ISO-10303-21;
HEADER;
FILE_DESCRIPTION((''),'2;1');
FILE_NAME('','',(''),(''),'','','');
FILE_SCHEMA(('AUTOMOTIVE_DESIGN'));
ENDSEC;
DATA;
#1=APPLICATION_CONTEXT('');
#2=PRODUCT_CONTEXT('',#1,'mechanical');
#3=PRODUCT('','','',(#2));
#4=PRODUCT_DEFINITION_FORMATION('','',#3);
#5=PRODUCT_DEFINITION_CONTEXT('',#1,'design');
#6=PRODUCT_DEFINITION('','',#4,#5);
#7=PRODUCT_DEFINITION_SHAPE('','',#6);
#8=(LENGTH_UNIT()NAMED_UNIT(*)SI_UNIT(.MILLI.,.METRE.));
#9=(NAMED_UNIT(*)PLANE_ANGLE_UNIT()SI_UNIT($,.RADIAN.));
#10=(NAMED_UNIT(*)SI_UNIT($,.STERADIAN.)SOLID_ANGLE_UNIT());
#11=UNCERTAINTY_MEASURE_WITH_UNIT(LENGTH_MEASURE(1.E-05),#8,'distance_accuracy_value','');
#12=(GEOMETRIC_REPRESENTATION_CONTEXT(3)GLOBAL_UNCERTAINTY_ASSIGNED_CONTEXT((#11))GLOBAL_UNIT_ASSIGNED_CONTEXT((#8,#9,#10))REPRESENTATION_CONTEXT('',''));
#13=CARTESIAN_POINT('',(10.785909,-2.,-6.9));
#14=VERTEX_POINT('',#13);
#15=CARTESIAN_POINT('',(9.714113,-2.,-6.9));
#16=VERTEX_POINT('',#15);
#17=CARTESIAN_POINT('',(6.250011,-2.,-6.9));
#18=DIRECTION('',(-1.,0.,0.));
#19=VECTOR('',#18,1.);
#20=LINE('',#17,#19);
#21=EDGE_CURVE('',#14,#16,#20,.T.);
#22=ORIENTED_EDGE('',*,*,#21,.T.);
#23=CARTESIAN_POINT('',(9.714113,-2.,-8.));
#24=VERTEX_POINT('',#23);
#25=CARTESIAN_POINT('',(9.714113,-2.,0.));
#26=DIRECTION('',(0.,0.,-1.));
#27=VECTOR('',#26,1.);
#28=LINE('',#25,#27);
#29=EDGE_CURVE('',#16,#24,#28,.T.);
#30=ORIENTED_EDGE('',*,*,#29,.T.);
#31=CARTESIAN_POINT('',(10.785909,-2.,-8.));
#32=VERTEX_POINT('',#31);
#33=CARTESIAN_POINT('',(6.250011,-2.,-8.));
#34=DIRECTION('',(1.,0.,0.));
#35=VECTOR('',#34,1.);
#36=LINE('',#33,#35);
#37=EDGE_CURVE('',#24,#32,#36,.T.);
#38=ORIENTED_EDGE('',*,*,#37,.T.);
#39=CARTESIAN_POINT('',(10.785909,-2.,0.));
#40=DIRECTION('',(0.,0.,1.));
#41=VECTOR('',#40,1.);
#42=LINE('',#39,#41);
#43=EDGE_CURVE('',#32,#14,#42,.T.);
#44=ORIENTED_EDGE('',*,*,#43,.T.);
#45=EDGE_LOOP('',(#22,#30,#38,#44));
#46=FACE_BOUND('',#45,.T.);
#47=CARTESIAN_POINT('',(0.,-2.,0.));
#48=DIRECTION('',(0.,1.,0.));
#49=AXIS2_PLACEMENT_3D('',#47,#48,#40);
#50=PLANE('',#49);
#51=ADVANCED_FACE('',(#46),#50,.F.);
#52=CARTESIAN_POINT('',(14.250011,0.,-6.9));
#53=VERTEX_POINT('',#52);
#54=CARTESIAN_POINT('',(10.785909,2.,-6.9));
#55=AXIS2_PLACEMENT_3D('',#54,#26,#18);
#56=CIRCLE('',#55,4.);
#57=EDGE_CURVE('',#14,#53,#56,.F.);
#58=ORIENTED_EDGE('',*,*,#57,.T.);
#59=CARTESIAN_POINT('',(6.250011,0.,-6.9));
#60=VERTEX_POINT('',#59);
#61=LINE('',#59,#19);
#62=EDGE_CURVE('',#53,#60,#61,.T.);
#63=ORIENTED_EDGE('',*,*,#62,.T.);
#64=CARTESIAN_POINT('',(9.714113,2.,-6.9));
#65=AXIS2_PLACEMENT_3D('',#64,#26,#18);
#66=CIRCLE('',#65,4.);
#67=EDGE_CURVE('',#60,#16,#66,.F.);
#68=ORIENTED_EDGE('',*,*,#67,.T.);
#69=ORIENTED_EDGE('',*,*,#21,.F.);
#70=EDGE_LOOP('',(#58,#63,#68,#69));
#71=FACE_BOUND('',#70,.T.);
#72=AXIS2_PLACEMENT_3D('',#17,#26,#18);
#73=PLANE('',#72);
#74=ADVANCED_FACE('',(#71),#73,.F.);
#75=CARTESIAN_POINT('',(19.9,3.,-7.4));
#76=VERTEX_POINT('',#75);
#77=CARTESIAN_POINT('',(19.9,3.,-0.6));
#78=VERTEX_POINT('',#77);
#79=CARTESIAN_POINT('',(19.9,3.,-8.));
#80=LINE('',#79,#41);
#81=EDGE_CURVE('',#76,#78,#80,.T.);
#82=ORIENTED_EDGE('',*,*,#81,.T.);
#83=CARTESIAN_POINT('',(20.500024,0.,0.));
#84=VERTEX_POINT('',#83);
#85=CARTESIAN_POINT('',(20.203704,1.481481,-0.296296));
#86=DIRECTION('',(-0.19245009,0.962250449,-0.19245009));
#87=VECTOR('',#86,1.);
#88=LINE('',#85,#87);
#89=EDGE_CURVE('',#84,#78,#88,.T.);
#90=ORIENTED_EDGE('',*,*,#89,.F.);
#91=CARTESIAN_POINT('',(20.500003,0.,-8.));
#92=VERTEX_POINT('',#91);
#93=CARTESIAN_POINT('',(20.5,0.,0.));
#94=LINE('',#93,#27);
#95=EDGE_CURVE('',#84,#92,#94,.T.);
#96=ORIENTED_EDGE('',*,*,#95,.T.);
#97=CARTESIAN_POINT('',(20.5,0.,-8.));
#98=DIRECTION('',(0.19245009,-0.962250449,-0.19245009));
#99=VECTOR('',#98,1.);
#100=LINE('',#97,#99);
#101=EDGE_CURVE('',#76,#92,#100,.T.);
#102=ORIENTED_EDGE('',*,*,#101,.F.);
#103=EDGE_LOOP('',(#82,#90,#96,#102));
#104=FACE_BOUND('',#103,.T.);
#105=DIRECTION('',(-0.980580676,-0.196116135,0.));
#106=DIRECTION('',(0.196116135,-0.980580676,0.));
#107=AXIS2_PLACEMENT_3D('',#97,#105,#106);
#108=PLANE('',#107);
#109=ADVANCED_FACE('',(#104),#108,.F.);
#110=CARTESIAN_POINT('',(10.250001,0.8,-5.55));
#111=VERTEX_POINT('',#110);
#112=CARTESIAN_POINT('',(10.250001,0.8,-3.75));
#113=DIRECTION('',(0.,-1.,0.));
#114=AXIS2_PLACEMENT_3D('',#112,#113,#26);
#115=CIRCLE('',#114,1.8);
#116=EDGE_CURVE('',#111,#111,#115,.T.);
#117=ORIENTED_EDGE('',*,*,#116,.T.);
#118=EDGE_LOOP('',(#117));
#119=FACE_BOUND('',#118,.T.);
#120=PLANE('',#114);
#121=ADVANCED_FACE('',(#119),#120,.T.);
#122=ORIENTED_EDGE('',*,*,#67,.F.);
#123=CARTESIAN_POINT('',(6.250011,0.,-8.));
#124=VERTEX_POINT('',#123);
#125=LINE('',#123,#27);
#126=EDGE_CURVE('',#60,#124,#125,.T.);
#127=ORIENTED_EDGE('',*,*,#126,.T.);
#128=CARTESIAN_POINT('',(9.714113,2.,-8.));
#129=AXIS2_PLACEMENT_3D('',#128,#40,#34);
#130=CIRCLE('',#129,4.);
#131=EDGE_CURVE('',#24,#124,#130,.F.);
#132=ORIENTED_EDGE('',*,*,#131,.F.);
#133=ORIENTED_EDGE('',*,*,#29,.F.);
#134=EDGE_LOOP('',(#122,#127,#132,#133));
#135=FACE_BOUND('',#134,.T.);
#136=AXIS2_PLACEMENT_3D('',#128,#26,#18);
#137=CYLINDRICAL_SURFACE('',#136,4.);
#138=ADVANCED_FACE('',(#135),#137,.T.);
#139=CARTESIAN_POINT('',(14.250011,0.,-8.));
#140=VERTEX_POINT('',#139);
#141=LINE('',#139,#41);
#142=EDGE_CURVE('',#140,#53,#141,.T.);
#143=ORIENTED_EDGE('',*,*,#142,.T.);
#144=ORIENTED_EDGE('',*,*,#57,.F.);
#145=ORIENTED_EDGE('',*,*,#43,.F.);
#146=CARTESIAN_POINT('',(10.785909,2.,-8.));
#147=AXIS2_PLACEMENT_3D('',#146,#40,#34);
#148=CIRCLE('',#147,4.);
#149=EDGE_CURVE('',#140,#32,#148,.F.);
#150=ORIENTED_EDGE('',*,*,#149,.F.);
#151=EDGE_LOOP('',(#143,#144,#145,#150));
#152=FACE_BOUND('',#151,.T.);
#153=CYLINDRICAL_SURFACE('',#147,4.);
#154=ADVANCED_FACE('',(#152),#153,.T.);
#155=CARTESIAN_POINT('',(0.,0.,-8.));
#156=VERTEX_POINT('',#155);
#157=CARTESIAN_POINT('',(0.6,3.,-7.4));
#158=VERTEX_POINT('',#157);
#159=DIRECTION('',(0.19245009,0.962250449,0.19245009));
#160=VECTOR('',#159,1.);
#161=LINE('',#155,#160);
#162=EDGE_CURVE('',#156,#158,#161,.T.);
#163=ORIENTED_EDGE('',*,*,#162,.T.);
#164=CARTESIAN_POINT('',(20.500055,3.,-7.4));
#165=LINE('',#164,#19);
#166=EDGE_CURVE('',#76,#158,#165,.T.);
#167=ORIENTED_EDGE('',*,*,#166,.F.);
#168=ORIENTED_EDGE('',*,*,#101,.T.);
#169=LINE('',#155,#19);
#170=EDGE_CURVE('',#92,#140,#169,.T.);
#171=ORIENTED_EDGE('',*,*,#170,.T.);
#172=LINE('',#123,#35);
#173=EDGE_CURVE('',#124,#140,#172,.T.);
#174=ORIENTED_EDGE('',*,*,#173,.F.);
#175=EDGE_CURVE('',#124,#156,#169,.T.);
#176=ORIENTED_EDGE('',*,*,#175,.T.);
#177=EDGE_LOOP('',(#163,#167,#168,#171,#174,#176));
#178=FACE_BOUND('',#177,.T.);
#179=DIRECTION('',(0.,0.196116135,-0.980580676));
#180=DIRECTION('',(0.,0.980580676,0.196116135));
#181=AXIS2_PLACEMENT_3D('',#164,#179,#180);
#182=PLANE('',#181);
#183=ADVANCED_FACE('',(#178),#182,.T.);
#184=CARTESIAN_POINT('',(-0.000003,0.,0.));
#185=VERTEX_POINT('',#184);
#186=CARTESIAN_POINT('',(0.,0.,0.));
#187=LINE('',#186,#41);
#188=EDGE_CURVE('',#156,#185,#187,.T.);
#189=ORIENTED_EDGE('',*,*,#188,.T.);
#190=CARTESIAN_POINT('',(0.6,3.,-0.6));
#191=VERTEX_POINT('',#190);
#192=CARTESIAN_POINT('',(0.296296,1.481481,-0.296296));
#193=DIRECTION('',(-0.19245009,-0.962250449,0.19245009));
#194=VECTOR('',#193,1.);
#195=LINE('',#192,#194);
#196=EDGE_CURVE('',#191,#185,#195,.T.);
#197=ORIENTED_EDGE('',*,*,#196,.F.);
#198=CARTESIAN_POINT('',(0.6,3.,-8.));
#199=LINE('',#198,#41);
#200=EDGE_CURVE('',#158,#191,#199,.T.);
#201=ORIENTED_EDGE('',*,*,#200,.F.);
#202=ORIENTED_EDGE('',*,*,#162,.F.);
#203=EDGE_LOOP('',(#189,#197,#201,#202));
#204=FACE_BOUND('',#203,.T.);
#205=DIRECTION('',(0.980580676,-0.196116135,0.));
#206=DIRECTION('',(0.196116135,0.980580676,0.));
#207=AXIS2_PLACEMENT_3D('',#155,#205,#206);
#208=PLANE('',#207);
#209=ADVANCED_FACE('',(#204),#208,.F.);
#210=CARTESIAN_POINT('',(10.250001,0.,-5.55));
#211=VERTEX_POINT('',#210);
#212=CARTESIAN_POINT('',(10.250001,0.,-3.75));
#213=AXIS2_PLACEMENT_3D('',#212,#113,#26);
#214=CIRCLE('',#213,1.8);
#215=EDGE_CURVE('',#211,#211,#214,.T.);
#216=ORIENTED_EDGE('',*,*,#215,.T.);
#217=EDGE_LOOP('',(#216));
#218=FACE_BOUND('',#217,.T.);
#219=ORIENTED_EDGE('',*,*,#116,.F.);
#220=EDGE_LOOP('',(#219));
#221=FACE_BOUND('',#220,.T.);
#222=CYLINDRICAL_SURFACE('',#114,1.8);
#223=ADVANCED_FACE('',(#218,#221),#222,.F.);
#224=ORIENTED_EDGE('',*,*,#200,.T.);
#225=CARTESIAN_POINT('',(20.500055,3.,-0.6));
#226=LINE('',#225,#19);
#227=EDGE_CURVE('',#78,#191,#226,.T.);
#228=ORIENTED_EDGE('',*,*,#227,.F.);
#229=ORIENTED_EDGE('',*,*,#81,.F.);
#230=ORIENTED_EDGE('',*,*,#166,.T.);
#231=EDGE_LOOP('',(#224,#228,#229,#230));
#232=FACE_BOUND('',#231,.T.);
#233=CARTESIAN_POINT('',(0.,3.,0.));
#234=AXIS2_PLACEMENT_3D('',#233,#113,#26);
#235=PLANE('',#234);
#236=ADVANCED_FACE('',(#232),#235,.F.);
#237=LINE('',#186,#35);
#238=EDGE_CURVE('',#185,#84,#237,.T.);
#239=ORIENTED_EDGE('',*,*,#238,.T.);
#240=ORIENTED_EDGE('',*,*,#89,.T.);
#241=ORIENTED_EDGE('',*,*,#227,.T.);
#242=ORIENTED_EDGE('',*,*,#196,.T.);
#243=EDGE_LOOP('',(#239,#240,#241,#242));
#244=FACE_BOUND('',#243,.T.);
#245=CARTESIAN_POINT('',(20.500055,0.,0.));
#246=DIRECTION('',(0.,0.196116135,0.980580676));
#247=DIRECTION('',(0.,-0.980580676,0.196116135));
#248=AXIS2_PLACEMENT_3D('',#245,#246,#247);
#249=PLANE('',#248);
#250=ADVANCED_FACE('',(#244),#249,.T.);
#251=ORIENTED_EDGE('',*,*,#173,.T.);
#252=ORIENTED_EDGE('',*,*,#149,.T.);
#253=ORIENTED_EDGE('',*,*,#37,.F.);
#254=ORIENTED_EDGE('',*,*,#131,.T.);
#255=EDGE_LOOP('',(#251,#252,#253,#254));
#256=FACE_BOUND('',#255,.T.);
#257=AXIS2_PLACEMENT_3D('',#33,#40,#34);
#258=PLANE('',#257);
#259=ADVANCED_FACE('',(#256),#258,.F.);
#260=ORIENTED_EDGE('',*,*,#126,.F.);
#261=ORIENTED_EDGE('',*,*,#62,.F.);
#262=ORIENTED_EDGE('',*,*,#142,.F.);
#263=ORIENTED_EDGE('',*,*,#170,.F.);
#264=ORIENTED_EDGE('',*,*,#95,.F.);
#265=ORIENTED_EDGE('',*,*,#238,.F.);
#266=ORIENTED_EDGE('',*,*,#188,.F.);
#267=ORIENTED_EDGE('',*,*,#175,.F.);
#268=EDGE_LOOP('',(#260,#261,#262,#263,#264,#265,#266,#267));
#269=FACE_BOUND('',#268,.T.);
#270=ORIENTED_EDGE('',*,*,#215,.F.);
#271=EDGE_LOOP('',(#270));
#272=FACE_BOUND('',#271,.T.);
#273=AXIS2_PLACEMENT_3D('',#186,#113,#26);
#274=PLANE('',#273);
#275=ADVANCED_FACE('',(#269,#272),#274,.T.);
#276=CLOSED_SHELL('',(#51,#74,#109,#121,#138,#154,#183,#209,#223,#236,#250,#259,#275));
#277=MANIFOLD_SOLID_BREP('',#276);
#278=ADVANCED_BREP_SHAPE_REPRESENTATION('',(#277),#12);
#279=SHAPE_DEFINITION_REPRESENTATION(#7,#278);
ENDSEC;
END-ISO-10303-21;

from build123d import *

# Parameters (mm, degrees)
SKETCH1_W               = 20.5
SKETCH1_H               = 8
BOSS_EXTRUDE1_DEPTH     = 3
CUT_EXTRUDE1_DEPTH      = 23.209232315
CUT_EXTRUDE1_DEPTH_BACK = 23.209232315
CUT_EXTRUDE2_DEPTH      = 23.209232315
CUT_EXTRUDE2_DEPTH_BACK = 23.209232315
SKETCH4_R               = 1.8
CUT_EXTRUDE3_DEPTH      = 0.8
SKETCH5_W               = 8
SKETCH5_H               = 1.1
BOSS_EXTRUDE2_DEPTH     = 2
FILLET1_R               = 4


with BuildPart() as part:
    # Sketch1 → Boss-Extrude1 (new body)
    with BuildSketch(Plane(origin=(0, 0, 0), x_dir=(1, 0, 0), z_dir=(0, 1, 0))):
        with Locations((10.25, 4)):
            Rectangle(SKETCH1_W, SKETCH1_H)
    extrude(amount=BOSS_EXTRUDE1_DEPTH)

    # Sketch2 → Cut-Extrude1 (cut, two sides: drawn at the far end of the back side and taken through both)
    with BuildSketch(Plane.XY.offset(-CUT_EXTRUDE1_DEPTH_BACK)):
        Polygon((0, 0), (0.6, 3), (0, 3), align=None)
        Polygon((20.5, 0), (19.9, 3), (20.5, 3), align=None)
    extrude(amount=CUT_EXTRUDE1_DEPTH + CUT_EXTRUDE1_DEPTH_BACK, mode=Mode.SUBTRACT)

    # Sketch3 → Cut-Extrude2 (cut, two sides: drawn at the far end of the back side and taken through both)
    with BuildSketch(Plane(origin=(0, 0, 0), x_dir=(0, 0, -1), z_dir=(1, 0, 0)).offset(-CUT_EXTRUDE2_DEPTH_BACK)):
        Polygon((0, 0), (0.6, 3), (0, 3), align=None)
        Polygon((8, 3), (7.4, 3), (8, 0), align=None)
    extrude(amount=CUT_EXTRUDE2_DEPTH + CUT_EXTRUDE2_DEPTH_BACK, mode=Mode.SUBTRACT)

    # Sketch4 → Cut-Extrude3 (cut)
    with BuildSketch(Plane.XZ):
        with Locations(Location((10.25000125, -3.75, 0), (0, 0, 270))):
            Circle(SKETCH4_R)
    extrude(amount=-CUT_EXTRUDE3_DEPTH, mode=Mode.SUBTRACT)

    # Sketch5 → Boss-Extrude2 (add)
    with BuildSketch(Plane.XZ):
        with Locations((10.250011, -7.45)):
            Rectangle(SKETCH5_W, SKETCH5_H)
    extrude(amount=BOSS_EXTRUDE2_DEPTH)

    # Fillet1
    # the kernel refuses this fillet: 4 mm, written as the material it takes off along each edge
    with BuildSketch(Plane(origin=(14.250011, -2, -16.660254038), x_dir=(0, 1, 0), z_dir=(0, 0, 1)), Plane(origin=(6.250011, -2, 1.760254038), x_dir=(0, 1, 0), z_dir=(0, 0, -1))) as fillet1_piece_1:
        with BuildLine():
            CenterArc((4, 3.464101615), FILLET1_R, 180, 60)
            Line((0, 3.464101615), (-0.08, 3.464101615))
            Line((-0.08, 3.464101615), (-0.08, 0))
            Line((-0.08, 0), (0, -0.08))
            ThreePointArc((0, -0.08), (1, -0.08), (1.96, -0.069282032))
            Line((1.96, -0.069282032), (2, 0))
        make_face()
    extrude(amount=18.420508076, mode=Mode.SUBTRACT)


solid = part.part
